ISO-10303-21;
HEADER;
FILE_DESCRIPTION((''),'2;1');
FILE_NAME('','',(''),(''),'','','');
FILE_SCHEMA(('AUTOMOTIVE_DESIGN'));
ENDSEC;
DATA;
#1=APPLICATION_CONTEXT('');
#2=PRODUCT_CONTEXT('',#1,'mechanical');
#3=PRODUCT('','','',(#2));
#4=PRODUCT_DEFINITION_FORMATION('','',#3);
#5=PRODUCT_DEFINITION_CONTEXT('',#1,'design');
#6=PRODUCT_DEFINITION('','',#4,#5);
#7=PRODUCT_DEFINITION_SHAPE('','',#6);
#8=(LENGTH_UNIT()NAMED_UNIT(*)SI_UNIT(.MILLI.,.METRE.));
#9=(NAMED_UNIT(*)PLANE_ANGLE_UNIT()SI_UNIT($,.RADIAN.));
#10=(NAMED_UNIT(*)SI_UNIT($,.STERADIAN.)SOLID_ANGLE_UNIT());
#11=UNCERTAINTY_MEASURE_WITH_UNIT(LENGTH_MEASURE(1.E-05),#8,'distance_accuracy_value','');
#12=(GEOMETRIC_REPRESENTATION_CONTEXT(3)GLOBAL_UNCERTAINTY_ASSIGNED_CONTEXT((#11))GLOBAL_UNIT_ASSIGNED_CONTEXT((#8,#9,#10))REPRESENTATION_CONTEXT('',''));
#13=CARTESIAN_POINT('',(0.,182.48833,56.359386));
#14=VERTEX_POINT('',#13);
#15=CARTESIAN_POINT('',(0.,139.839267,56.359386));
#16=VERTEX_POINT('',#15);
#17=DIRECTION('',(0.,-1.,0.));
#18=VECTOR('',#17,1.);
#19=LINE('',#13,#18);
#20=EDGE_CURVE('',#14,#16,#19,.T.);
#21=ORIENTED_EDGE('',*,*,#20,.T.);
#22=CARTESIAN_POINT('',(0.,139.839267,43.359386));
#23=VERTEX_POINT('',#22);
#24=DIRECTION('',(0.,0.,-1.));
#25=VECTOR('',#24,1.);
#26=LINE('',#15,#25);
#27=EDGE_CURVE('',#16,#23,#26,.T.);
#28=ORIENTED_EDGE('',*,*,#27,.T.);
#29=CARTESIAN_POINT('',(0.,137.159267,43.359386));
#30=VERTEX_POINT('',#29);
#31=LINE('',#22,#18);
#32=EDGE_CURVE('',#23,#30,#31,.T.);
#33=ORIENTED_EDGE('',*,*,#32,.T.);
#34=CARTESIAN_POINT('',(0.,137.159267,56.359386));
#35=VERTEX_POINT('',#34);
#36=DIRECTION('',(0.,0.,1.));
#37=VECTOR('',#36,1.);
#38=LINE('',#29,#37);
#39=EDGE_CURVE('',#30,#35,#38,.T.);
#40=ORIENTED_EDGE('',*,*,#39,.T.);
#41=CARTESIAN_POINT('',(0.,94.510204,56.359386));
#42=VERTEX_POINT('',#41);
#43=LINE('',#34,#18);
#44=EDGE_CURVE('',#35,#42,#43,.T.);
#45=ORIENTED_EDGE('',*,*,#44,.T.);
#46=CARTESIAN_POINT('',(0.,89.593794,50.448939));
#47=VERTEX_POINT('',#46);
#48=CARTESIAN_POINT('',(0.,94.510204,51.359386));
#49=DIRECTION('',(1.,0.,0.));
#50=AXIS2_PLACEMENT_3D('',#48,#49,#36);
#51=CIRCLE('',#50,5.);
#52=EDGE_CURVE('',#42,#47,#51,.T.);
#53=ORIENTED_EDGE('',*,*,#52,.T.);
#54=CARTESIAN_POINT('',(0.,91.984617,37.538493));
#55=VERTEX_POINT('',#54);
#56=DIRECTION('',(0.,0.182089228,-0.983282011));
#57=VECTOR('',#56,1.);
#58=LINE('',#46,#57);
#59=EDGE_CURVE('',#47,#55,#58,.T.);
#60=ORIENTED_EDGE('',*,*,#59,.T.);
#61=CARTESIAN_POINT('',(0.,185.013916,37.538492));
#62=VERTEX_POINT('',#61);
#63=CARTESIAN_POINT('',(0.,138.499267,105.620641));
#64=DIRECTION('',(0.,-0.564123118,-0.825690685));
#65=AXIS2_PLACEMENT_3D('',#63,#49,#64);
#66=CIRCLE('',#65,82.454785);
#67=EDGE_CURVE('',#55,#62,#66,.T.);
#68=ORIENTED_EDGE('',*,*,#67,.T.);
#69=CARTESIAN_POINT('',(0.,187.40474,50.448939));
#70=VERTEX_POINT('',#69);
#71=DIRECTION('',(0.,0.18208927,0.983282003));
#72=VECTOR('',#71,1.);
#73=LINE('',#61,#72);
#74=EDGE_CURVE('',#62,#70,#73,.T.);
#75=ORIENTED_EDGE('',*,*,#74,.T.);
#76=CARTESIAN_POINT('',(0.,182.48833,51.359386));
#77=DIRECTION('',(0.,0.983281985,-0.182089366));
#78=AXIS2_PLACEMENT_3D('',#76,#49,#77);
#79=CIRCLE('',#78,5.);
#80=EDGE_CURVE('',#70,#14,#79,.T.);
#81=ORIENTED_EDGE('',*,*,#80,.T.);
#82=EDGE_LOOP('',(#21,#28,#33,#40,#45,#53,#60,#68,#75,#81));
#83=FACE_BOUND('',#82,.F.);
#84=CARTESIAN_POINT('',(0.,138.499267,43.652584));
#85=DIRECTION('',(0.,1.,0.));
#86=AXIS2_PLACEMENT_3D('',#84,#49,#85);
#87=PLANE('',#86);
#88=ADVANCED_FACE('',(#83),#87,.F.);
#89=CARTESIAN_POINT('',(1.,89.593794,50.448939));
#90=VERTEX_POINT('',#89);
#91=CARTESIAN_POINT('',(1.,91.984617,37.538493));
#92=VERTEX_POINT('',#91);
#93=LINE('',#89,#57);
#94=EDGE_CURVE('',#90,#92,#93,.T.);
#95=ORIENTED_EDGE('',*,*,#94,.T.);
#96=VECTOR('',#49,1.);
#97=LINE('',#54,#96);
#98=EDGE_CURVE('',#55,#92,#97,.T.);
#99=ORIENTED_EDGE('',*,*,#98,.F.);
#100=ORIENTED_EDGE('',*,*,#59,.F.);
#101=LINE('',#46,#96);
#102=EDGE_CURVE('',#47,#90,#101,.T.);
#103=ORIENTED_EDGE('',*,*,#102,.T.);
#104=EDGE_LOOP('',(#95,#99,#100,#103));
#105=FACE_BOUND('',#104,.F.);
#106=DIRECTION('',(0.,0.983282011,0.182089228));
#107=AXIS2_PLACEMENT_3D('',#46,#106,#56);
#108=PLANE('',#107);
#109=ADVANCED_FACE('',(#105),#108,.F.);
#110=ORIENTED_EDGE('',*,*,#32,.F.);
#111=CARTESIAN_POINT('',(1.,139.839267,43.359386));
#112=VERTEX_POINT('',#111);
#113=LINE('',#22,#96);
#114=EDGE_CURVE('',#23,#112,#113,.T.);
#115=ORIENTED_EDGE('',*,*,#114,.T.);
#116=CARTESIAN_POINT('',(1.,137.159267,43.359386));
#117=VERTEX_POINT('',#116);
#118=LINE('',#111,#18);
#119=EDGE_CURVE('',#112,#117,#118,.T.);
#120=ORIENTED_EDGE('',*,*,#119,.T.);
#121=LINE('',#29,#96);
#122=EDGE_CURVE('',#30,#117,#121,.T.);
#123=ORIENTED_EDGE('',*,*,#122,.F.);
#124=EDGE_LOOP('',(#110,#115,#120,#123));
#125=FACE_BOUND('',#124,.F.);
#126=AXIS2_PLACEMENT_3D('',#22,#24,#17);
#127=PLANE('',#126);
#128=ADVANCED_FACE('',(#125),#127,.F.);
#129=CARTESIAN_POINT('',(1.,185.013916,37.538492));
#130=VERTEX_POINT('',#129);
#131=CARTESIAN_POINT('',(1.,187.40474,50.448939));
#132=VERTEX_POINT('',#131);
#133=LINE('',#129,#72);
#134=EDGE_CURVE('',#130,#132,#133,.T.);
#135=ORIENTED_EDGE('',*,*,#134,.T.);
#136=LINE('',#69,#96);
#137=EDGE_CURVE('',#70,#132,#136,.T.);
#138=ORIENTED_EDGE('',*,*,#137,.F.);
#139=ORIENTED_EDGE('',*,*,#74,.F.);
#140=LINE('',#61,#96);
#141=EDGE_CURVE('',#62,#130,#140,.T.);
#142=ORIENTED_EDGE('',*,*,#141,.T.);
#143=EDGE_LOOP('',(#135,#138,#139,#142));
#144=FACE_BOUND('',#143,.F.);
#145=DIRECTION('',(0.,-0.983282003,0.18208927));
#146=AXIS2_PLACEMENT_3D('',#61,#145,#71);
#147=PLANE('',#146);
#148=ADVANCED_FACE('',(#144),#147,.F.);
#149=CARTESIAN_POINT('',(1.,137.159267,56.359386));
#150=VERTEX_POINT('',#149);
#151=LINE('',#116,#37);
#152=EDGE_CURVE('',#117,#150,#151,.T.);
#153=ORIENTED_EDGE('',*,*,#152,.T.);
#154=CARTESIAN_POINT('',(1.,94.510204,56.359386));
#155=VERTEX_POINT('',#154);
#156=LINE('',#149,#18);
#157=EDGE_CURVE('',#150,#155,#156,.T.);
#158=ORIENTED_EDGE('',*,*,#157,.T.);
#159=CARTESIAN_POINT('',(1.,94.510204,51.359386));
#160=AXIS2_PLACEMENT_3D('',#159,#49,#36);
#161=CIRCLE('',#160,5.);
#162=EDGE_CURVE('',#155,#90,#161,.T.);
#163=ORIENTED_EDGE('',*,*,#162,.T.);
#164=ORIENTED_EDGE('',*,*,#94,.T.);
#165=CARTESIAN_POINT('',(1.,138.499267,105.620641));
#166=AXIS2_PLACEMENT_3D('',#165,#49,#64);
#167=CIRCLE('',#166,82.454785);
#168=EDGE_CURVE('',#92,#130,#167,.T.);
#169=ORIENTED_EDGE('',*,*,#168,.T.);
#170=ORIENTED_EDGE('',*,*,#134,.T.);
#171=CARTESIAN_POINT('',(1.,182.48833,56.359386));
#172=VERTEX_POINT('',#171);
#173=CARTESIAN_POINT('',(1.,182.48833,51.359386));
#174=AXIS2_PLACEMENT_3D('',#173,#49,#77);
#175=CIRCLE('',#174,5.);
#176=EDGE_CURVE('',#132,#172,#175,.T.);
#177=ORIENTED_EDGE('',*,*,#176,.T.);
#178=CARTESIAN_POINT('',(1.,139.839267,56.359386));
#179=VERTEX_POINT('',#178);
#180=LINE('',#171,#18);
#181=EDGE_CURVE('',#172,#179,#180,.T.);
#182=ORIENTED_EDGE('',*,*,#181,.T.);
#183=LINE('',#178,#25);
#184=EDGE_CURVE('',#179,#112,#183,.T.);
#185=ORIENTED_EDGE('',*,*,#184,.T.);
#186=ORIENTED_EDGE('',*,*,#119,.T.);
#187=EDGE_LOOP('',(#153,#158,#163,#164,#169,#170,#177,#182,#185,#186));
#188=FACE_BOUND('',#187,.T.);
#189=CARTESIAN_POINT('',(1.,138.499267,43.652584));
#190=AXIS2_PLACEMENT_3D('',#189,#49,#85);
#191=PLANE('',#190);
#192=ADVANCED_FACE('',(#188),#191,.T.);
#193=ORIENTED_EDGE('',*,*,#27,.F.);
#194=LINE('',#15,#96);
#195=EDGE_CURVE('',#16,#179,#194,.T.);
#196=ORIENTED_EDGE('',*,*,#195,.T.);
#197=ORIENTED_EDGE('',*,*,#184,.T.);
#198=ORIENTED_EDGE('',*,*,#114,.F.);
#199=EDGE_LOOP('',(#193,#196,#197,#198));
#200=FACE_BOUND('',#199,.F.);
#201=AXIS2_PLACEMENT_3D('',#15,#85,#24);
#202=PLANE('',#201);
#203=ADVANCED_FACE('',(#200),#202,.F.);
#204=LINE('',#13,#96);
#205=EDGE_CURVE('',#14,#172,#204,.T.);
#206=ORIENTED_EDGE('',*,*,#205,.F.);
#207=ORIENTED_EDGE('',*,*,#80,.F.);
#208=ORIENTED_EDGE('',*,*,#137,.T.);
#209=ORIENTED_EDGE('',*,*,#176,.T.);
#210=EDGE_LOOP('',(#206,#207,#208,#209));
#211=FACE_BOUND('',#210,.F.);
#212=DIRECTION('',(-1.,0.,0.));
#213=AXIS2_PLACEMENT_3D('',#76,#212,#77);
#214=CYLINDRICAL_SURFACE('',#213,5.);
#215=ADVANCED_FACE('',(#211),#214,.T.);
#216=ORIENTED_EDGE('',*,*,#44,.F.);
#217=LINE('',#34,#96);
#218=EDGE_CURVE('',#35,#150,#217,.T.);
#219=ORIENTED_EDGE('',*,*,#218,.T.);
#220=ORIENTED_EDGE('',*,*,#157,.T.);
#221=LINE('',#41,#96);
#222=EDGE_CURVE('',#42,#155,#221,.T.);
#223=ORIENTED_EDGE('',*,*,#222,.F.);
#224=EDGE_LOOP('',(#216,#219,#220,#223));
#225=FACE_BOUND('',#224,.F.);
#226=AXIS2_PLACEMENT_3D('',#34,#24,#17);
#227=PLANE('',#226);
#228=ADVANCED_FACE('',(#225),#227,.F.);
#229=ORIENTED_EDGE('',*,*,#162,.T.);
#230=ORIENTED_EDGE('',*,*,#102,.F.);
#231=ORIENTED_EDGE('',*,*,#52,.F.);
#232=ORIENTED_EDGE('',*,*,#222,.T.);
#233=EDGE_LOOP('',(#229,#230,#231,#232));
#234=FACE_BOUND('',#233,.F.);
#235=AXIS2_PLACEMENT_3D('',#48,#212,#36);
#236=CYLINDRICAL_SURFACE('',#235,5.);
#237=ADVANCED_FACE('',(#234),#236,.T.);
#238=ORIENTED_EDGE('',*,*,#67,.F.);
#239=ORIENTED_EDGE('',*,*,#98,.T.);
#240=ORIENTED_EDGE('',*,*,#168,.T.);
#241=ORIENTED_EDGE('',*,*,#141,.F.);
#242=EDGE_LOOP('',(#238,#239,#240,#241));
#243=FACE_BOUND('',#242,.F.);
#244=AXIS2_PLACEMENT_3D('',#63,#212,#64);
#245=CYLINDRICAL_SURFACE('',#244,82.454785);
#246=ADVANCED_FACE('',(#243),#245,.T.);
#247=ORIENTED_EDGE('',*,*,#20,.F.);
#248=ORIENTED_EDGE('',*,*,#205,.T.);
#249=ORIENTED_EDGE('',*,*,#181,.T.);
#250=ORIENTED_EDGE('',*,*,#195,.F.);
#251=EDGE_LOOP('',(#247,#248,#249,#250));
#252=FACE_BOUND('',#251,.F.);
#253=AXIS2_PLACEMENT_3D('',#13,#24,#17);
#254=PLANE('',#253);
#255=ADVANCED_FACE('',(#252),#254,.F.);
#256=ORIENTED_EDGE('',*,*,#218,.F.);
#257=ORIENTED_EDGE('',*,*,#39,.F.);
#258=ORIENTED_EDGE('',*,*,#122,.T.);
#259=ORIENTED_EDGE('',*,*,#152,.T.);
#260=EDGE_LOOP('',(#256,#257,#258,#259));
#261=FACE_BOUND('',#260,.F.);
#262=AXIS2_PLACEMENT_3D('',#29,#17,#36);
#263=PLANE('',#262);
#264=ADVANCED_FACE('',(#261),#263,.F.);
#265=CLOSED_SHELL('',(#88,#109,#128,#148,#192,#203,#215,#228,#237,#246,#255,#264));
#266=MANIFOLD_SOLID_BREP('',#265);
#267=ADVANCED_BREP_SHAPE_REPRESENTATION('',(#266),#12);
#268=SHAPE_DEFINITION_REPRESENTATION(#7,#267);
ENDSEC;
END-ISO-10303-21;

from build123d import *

# Parameters (mm, degrees)
F1_DEPTH = 1


# Not quite as in the source:
# - ends of sketch curves that miss each other by under 0.0002 mm in the source are joined


with BuildPart() as f1:
    # F0 (on Right) → F1 (new body)
    with BuildSketch(Plane.YZ):
        with BuildLine():
            Line((137.159267, 56.359386), (94.510204, 56.359386))
            ThreePointArc((94.510204, 56.359386), (90.6662324271, 54.5568666562), (89.5937941011, 50.4489390187))
            Line((89.5937941011, 50.4489390187), (91.984617, 37.538493))
            ThreePointArc((91.984617, 37.538493), (138.4992665872, 23.165856), (185.0139164157, 37.5384923916))
            Line((185.0139164157, 37.5384923916), (187.40474, 50.448939))
            ThreePointArc((187.40474, 50.448939), (186.3323015729, 54.5568666562), (182.48833, 56.359386))
            Line((182.48833, 56.359386), (139.839267, 56.359386))
            Line((139.839267, 56.359386), (139.839267, 43.359386))
            Line((139.839267, 43.359386), (137.159267, 43.359386))
            Line((137.159267, 43.359386), (137.159267, 56.359386))
        make_face()
    extrude(amount=F1_DEPTH)


solid = f1.part
